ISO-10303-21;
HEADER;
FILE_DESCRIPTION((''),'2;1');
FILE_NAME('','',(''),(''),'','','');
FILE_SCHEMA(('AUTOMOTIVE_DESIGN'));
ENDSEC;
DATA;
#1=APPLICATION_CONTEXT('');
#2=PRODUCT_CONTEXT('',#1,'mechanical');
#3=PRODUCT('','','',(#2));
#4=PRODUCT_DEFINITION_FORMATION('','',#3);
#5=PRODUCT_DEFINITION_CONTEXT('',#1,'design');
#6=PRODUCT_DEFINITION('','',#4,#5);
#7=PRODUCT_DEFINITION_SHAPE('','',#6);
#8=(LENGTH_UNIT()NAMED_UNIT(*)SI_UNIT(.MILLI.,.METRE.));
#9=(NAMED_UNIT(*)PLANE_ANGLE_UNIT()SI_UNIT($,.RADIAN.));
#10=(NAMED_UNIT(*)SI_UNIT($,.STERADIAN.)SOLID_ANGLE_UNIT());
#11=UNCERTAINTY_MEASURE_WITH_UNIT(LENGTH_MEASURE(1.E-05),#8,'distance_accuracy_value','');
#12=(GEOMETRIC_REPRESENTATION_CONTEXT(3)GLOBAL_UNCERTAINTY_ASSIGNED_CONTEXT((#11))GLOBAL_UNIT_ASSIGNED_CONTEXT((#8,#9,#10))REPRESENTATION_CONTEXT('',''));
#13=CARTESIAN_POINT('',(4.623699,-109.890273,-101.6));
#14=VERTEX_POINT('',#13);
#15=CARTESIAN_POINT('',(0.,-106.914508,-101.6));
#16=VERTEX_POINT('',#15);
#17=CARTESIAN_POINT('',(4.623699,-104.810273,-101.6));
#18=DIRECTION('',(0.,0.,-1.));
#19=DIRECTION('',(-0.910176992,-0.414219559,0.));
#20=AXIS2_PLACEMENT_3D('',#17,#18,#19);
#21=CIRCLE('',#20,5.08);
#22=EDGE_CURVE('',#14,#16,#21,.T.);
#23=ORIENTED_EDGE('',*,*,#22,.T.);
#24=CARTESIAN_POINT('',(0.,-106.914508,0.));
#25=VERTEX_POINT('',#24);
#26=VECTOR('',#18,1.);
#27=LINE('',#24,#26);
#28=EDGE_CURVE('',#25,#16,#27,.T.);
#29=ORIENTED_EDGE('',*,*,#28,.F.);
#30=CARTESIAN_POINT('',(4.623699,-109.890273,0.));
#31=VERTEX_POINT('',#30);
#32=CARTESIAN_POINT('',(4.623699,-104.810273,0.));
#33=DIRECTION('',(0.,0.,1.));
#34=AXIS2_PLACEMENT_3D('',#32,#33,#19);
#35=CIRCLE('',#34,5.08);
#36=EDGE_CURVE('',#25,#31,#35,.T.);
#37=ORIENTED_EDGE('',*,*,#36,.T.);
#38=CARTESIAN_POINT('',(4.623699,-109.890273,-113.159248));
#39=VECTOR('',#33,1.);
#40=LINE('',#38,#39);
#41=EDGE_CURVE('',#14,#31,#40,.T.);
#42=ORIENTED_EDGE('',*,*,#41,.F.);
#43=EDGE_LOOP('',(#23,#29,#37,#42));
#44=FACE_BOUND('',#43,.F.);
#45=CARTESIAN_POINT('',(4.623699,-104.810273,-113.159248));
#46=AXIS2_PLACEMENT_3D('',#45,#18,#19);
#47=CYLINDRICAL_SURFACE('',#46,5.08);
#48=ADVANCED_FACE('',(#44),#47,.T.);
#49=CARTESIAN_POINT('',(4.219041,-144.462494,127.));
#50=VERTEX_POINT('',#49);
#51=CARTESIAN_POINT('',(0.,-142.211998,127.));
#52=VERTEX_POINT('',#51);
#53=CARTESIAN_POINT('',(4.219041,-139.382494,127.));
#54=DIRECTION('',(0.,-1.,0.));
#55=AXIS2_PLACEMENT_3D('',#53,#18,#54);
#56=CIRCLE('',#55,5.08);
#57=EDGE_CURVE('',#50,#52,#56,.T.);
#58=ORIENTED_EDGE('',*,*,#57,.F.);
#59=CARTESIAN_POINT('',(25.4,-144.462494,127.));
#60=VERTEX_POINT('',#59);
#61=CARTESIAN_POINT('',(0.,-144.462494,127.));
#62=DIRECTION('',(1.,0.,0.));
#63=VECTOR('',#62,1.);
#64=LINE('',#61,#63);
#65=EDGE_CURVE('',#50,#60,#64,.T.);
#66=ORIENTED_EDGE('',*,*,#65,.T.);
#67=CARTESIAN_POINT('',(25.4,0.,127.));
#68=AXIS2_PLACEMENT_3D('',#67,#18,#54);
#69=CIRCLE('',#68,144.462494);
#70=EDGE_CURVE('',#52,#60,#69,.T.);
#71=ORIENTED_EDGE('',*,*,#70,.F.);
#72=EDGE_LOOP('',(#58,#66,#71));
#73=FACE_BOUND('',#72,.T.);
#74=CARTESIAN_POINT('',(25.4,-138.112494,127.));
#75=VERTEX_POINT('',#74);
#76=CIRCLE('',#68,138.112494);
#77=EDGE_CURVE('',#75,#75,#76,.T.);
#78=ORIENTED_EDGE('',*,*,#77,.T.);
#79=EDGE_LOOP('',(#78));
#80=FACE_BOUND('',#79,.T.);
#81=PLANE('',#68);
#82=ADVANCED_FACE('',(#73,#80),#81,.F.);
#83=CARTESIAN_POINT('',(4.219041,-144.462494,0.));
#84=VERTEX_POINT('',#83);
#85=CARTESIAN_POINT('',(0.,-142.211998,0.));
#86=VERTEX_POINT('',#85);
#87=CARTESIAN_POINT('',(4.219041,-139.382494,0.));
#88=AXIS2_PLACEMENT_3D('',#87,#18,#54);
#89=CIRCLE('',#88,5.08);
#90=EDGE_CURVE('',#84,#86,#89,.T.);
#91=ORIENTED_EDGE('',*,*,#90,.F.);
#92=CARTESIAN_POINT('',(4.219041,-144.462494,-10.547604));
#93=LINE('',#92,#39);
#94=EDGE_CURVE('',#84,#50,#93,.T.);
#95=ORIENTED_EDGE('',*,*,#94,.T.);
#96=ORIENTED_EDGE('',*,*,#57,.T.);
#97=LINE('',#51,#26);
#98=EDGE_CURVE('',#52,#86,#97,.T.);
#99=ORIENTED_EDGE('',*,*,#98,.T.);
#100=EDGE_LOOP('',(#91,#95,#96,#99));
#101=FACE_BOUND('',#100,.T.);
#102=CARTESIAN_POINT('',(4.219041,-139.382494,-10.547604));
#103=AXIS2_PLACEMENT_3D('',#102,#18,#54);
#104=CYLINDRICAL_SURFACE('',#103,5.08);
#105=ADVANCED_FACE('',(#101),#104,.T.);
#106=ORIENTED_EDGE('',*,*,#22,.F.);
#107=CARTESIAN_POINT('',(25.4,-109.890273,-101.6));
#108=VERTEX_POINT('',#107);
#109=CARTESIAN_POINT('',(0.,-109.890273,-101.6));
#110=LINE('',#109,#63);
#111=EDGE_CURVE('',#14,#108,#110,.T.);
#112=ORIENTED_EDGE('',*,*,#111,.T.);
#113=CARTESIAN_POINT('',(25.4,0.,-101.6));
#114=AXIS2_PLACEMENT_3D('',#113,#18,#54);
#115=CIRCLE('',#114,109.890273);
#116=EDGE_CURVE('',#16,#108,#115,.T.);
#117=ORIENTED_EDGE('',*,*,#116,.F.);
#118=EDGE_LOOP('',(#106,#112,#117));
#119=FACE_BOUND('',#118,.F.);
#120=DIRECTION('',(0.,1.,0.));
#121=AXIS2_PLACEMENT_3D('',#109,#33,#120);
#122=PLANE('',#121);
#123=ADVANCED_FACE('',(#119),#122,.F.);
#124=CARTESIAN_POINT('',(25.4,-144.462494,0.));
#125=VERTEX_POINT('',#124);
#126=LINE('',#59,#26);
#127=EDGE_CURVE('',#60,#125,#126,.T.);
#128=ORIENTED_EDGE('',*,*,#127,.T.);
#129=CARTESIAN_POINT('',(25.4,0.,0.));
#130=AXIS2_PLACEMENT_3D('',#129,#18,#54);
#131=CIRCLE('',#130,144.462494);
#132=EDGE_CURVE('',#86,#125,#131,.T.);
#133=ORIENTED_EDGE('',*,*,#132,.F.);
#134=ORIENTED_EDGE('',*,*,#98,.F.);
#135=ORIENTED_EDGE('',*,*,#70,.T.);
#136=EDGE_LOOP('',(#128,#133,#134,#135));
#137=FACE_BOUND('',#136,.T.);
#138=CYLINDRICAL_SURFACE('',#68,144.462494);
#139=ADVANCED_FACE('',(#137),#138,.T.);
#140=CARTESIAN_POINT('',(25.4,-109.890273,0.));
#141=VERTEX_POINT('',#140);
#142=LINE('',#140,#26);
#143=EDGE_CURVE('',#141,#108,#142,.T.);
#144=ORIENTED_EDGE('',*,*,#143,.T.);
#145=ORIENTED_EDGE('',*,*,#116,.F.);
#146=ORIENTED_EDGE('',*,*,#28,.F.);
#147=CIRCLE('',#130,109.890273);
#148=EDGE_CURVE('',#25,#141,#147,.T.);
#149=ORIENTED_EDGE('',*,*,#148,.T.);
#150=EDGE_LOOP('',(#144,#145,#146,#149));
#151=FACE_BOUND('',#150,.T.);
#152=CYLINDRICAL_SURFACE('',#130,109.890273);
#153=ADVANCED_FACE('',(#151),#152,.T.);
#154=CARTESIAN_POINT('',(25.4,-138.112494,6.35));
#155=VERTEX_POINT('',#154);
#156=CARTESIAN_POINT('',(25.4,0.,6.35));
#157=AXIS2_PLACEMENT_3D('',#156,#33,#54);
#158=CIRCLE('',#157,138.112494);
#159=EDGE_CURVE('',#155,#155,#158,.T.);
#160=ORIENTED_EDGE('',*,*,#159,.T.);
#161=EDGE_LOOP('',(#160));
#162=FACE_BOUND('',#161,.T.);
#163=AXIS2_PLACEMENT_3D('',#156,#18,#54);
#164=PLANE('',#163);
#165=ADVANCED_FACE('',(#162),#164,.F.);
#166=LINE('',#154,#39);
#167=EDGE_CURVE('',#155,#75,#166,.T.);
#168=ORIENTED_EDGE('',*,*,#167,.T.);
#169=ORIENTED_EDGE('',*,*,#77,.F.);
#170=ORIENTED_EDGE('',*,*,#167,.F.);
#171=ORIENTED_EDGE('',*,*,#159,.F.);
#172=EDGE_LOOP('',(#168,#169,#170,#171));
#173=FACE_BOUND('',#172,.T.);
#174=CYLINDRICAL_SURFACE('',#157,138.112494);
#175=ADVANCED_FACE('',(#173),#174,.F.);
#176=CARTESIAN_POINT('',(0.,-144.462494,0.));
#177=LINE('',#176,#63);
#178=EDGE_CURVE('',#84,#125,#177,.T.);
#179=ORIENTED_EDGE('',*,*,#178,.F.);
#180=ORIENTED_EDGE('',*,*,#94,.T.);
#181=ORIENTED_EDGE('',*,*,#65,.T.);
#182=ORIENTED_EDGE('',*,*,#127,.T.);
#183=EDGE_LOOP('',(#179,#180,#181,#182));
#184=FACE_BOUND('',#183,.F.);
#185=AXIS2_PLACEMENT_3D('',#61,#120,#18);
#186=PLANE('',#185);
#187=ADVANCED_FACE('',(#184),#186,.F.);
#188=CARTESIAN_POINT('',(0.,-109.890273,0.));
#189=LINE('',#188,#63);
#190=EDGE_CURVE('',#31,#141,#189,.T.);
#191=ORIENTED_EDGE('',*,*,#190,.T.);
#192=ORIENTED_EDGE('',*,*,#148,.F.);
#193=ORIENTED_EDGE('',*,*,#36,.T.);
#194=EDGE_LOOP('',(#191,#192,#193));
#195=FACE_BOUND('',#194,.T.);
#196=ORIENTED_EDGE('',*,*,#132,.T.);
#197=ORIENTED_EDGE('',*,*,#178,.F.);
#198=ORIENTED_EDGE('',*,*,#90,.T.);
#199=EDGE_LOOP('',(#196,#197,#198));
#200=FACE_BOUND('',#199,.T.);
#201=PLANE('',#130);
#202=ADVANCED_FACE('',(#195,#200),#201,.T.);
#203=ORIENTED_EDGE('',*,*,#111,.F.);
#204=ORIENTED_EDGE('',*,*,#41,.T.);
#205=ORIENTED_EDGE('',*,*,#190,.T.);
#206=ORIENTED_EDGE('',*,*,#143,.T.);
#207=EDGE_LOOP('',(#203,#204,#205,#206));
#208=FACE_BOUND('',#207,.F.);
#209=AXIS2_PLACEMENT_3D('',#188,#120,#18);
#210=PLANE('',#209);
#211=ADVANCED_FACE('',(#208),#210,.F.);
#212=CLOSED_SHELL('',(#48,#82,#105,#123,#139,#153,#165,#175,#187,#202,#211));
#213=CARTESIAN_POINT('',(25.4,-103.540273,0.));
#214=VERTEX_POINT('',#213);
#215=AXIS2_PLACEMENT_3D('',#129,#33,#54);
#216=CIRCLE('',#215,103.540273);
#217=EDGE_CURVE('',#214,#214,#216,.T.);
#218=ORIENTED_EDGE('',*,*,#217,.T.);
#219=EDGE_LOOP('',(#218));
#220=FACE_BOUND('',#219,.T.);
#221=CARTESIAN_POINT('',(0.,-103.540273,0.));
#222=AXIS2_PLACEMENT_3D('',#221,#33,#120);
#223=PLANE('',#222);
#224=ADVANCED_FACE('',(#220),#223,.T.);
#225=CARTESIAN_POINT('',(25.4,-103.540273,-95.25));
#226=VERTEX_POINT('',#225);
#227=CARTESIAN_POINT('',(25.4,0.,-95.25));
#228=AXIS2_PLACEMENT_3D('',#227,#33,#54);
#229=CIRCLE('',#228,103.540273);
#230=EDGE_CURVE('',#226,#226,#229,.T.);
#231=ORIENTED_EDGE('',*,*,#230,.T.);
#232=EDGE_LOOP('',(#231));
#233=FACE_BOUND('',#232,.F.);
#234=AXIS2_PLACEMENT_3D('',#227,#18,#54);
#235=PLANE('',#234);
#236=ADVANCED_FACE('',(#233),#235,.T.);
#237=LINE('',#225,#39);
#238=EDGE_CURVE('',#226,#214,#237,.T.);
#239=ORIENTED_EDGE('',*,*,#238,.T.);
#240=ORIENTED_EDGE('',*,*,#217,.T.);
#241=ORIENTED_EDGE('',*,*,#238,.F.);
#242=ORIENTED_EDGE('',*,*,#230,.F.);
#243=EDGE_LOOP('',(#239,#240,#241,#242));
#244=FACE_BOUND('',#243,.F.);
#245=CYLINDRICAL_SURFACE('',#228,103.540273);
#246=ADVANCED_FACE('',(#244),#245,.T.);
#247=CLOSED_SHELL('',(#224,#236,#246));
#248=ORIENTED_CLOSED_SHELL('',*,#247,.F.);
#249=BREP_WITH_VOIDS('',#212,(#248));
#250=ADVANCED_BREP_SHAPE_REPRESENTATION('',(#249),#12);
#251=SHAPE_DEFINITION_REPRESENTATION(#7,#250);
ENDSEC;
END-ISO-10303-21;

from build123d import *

# Parameters (mm, degrees)
F1_DEPTH    = 25.4
F3_T1_DEPTH = 113.1592478003
F3_T3_DEPTH = 148.0952074612


# Not quite as in the source:
# - a fillet or chamfer that OpenCascade refuses, or shapes differently, is made with other operations: its cross-section is extruded or revolved along the edge and cut away or added


with BuildPart() as f1:
    # F0 (on Right) → F1 (new body)
    with BuildSketch(Plane.YZ):
        Polygon((-103.5402726054, 0), (0, 0), (0, 6.35), (-138.112494323, 6.35), (-138.112494323, 127), (-144.462494323, 127), (-144.462494323, 0), (-109.8902726054, 0), align=None)
        Polygon((-103.5402726054, -95.25), (-103.5402726054, 0), (-109.8902726054, 0), (-109.8902726054, -101.6), (0, -101.6), (0, -95.25), align=None)
    extrude(amount=F1_DEPTH)

    # F1_face (on face) → F2 (revolve)
    with BuildSketch(Plane(origin=(25.4, -92.8938883884, -14.564984288), x_dir=(0, 1, 0), z_dir=(1, 0, 0))):
        Polygon((-51.5686059346, 14.564984288), (-16.996384217, 14.564984288), (-16.996384217, -87.035015712), (92.8938883884, -87.035015712), (92.8938883884, -80.685015712), (-10.646384217, -80.685015712), (-10.646384217, 14.564984288), (92.8938883884, 14.564984288), (92.8938883884, 20.914984288), (-45.2186059346, 20.914984288), (-45.2186059346, 141.564984288), (-51.5686059346, 141.564984288), align=None)
    revolve(axis=Axis((25.4, 0, 3.175), (0, 0, -1)))

    # F3: fillet of radius 5.08 on 4 edges, made by hand

    # F3_s2 → F3_t1 (cut)
    with BuildSketch(Plane.XY.offset(-113.1592478003)):
        with BuildLine():
            ThreePointArc((0, -106.9145079645), (1.8744370031, -109.0820354513), (4.6236991201, -109.8902726054))
            Line((4.6236991201, -109.8902726054), (4.6236991201, -109.9918726054))
            Line((4.6236991201, -109.9918726054), (0, -109.9918726054))
            Line((0, -109.9918726054), (-0.1016, -109.8902726054))
            ThreePointArc((-0.1016, -109.8902726054), (-0.1016, -108.4023902849), (-0.0924739824, -106.9565926716))
            Line((-0.0924739824, -106.9565926716), (0, -106.9145079645))
        make_face()
    extrude(amount=F3_T1_DEPTH, mode=Mode.SUBTRACT)

    # F3_s4 → F3_t3 (cut)
    with BuildSketch(Plane.XY.offset(-10.5476037306)):
        with BuildLine():
            ThreePointArc((4.2190414922, -144.462494323), (1.8281710158, -143.8646967241), (0, -142.2119976163))
            Line((0, -142.2119976163), (-0.0843808298, -142.2685876821))
            ThreePointArc((-0.0843808298, -142.2685876821), (-0.1016, -143.3372459696), (-0.1016, -144.462494323))
            Line((-0.1016, -144.462494323), (0, -144.564094323))
            Line((0, -144.564094323), (4.2190414922, -144.564094323))
            Line((4.2190414922, -144.564094323), (4.2190414922, -144.462494323))
        make_face()
    extrude(amount=F3_T3_DEPTH, mode=Mode.SUBTRACT)


solid = f1.part
